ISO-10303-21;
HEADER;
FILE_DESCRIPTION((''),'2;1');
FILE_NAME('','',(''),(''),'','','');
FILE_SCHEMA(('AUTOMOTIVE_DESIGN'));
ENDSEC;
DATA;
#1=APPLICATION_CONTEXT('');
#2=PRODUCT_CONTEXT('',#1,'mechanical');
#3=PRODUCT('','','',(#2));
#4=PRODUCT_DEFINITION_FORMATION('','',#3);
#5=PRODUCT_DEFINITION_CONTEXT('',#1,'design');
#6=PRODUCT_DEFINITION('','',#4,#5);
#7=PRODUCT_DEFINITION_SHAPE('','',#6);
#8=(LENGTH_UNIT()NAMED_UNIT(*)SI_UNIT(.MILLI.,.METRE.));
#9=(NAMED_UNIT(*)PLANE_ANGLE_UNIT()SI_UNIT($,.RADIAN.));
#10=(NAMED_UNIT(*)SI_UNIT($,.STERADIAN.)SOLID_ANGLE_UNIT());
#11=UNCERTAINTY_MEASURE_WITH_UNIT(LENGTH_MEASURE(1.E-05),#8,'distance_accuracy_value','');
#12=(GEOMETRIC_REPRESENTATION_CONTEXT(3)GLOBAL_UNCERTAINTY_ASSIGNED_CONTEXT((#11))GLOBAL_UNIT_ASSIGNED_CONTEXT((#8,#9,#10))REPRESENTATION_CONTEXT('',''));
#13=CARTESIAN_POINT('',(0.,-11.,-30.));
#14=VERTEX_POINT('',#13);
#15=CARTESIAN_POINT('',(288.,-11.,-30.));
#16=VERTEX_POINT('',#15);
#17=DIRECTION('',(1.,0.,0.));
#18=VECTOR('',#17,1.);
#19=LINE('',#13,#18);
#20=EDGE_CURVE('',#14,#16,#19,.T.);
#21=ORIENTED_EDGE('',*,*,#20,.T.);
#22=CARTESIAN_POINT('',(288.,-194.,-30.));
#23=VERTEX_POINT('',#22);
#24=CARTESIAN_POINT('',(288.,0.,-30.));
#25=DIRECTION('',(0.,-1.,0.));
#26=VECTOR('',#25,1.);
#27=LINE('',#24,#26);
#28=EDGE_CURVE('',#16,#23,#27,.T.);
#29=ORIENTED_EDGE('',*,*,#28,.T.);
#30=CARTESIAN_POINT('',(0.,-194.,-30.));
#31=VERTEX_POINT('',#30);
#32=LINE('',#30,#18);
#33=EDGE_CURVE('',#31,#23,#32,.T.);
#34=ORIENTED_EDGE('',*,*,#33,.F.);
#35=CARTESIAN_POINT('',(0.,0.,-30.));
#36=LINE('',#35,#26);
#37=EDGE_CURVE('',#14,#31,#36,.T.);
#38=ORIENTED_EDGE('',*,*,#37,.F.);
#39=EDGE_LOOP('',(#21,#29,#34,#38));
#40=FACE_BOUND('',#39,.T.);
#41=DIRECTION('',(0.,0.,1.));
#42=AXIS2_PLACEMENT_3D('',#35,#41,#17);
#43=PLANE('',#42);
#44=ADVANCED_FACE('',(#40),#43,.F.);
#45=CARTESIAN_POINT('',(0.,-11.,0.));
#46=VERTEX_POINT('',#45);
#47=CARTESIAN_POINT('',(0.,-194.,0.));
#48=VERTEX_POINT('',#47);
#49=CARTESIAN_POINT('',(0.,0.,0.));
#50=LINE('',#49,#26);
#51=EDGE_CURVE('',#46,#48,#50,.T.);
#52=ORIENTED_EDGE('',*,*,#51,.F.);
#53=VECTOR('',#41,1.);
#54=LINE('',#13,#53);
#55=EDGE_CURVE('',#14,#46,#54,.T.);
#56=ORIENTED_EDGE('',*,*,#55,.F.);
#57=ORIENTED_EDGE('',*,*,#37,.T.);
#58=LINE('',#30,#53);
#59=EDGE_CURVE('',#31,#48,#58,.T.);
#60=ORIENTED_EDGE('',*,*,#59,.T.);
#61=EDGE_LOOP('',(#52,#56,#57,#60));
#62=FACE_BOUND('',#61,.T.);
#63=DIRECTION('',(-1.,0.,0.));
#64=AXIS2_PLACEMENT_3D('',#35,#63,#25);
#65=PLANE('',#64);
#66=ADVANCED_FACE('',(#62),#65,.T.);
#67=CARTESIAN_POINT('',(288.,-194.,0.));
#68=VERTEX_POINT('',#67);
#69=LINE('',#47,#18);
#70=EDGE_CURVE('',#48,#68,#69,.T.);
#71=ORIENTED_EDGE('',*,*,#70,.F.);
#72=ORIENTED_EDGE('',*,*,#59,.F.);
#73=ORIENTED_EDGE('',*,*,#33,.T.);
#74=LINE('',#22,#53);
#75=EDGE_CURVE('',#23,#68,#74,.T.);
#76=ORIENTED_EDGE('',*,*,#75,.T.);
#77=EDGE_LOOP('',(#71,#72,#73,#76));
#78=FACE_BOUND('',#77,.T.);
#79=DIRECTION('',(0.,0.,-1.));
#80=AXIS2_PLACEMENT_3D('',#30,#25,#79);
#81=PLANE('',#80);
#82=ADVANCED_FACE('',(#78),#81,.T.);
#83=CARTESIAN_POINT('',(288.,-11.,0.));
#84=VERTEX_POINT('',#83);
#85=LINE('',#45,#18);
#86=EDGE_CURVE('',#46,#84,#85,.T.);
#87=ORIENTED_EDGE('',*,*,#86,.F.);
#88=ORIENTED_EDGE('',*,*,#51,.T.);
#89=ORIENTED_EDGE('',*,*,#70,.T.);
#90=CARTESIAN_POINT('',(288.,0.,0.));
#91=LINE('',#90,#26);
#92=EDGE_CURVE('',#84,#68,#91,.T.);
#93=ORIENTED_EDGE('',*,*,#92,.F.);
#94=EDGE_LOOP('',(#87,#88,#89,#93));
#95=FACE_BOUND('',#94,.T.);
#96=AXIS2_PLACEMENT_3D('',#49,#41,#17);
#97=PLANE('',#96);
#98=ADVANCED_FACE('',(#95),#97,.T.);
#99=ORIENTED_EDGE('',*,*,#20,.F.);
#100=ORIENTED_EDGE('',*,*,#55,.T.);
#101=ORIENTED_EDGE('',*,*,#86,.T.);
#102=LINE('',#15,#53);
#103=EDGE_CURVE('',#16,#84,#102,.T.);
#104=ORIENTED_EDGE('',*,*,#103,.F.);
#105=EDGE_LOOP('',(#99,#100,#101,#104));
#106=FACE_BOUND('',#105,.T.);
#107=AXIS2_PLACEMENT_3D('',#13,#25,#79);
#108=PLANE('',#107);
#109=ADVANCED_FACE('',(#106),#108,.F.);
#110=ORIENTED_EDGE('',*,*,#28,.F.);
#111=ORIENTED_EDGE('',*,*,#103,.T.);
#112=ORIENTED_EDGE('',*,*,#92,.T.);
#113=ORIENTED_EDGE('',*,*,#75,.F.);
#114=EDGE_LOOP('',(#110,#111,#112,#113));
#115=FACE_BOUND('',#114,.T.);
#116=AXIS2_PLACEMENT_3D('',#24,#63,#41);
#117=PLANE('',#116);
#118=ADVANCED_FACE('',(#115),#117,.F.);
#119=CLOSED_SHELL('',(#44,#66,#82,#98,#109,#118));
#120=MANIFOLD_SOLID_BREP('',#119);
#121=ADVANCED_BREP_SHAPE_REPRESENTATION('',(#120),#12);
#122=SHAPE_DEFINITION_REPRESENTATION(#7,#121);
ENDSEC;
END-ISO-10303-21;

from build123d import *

# Parameters (mm, degrees)
IZIM1_W                    = 595
IZIM1_H                    = 194
TABAN_FLAN_1_DEPTH         = 30
KES_EKSTR_ZYON1_DEPTH      = 627.546885716
KES_EKSTR_ZYON1_DEPTH_BACK = 627.546885716
IZIM2_W                    = 307
IZIM2_H                    = 194
KES_EKSTR_ZYON2_DEPTH      = 349.539811212
KES_EKSTR_ZYON2_DEPTH_BACK = 349.539811212
IZIM3_W                    = 288
IZIM3_H                    = 11


# Sheet-metal steps are written as plain solids
with BuildPart() as part:
    # Çizim1 → Taban-Flanş1 (new body)
    with BuildSketch(Plane.XY):
        with Locations((297.5, -97)):
            Rectangle(IZIM1_W, IZIM1_H)
    extrude(amount=-TABAN_FLAN_1_DEPTH)

    # Çizim2 → Kes-Ekstrüzyon1 (cut, two sides: drawn at the far end of the back side and taken through both)
    with BuildSketch(Plane.XY.offset(-KES_EKSTR_ZYON1_DEPTH_BACK)):
        with Locations((441.5, -97)):
            Rectangle(IZIM2_W, IZIM2_H)
    extrude(amount=KES_EKSTR_ZYON1_DEPTH + KES_EKSTR_ZYON1_DEPTH_BACK, mode=Mode.SUBTRACT)

    # Çizim3 → Kes-Ekstrüzyon2 (cut, two sides: drawn at the far end of the back side and taken through both)
    with BuildSketch(Plane.XY.offset(-KES_EKSTR_ZYON2_DEPTH_BACK)):
        with Locations((144, -5.5)):
            Rectangle(IZIM3_W, IZIM3_H)
    extrude(amount=KES_EKSTR_ZYON2_DEPTH + KES_EKSTR_ZYON2_DEPTH_BACK, mode=Mode.SUBTRACT)


solid = part.part
